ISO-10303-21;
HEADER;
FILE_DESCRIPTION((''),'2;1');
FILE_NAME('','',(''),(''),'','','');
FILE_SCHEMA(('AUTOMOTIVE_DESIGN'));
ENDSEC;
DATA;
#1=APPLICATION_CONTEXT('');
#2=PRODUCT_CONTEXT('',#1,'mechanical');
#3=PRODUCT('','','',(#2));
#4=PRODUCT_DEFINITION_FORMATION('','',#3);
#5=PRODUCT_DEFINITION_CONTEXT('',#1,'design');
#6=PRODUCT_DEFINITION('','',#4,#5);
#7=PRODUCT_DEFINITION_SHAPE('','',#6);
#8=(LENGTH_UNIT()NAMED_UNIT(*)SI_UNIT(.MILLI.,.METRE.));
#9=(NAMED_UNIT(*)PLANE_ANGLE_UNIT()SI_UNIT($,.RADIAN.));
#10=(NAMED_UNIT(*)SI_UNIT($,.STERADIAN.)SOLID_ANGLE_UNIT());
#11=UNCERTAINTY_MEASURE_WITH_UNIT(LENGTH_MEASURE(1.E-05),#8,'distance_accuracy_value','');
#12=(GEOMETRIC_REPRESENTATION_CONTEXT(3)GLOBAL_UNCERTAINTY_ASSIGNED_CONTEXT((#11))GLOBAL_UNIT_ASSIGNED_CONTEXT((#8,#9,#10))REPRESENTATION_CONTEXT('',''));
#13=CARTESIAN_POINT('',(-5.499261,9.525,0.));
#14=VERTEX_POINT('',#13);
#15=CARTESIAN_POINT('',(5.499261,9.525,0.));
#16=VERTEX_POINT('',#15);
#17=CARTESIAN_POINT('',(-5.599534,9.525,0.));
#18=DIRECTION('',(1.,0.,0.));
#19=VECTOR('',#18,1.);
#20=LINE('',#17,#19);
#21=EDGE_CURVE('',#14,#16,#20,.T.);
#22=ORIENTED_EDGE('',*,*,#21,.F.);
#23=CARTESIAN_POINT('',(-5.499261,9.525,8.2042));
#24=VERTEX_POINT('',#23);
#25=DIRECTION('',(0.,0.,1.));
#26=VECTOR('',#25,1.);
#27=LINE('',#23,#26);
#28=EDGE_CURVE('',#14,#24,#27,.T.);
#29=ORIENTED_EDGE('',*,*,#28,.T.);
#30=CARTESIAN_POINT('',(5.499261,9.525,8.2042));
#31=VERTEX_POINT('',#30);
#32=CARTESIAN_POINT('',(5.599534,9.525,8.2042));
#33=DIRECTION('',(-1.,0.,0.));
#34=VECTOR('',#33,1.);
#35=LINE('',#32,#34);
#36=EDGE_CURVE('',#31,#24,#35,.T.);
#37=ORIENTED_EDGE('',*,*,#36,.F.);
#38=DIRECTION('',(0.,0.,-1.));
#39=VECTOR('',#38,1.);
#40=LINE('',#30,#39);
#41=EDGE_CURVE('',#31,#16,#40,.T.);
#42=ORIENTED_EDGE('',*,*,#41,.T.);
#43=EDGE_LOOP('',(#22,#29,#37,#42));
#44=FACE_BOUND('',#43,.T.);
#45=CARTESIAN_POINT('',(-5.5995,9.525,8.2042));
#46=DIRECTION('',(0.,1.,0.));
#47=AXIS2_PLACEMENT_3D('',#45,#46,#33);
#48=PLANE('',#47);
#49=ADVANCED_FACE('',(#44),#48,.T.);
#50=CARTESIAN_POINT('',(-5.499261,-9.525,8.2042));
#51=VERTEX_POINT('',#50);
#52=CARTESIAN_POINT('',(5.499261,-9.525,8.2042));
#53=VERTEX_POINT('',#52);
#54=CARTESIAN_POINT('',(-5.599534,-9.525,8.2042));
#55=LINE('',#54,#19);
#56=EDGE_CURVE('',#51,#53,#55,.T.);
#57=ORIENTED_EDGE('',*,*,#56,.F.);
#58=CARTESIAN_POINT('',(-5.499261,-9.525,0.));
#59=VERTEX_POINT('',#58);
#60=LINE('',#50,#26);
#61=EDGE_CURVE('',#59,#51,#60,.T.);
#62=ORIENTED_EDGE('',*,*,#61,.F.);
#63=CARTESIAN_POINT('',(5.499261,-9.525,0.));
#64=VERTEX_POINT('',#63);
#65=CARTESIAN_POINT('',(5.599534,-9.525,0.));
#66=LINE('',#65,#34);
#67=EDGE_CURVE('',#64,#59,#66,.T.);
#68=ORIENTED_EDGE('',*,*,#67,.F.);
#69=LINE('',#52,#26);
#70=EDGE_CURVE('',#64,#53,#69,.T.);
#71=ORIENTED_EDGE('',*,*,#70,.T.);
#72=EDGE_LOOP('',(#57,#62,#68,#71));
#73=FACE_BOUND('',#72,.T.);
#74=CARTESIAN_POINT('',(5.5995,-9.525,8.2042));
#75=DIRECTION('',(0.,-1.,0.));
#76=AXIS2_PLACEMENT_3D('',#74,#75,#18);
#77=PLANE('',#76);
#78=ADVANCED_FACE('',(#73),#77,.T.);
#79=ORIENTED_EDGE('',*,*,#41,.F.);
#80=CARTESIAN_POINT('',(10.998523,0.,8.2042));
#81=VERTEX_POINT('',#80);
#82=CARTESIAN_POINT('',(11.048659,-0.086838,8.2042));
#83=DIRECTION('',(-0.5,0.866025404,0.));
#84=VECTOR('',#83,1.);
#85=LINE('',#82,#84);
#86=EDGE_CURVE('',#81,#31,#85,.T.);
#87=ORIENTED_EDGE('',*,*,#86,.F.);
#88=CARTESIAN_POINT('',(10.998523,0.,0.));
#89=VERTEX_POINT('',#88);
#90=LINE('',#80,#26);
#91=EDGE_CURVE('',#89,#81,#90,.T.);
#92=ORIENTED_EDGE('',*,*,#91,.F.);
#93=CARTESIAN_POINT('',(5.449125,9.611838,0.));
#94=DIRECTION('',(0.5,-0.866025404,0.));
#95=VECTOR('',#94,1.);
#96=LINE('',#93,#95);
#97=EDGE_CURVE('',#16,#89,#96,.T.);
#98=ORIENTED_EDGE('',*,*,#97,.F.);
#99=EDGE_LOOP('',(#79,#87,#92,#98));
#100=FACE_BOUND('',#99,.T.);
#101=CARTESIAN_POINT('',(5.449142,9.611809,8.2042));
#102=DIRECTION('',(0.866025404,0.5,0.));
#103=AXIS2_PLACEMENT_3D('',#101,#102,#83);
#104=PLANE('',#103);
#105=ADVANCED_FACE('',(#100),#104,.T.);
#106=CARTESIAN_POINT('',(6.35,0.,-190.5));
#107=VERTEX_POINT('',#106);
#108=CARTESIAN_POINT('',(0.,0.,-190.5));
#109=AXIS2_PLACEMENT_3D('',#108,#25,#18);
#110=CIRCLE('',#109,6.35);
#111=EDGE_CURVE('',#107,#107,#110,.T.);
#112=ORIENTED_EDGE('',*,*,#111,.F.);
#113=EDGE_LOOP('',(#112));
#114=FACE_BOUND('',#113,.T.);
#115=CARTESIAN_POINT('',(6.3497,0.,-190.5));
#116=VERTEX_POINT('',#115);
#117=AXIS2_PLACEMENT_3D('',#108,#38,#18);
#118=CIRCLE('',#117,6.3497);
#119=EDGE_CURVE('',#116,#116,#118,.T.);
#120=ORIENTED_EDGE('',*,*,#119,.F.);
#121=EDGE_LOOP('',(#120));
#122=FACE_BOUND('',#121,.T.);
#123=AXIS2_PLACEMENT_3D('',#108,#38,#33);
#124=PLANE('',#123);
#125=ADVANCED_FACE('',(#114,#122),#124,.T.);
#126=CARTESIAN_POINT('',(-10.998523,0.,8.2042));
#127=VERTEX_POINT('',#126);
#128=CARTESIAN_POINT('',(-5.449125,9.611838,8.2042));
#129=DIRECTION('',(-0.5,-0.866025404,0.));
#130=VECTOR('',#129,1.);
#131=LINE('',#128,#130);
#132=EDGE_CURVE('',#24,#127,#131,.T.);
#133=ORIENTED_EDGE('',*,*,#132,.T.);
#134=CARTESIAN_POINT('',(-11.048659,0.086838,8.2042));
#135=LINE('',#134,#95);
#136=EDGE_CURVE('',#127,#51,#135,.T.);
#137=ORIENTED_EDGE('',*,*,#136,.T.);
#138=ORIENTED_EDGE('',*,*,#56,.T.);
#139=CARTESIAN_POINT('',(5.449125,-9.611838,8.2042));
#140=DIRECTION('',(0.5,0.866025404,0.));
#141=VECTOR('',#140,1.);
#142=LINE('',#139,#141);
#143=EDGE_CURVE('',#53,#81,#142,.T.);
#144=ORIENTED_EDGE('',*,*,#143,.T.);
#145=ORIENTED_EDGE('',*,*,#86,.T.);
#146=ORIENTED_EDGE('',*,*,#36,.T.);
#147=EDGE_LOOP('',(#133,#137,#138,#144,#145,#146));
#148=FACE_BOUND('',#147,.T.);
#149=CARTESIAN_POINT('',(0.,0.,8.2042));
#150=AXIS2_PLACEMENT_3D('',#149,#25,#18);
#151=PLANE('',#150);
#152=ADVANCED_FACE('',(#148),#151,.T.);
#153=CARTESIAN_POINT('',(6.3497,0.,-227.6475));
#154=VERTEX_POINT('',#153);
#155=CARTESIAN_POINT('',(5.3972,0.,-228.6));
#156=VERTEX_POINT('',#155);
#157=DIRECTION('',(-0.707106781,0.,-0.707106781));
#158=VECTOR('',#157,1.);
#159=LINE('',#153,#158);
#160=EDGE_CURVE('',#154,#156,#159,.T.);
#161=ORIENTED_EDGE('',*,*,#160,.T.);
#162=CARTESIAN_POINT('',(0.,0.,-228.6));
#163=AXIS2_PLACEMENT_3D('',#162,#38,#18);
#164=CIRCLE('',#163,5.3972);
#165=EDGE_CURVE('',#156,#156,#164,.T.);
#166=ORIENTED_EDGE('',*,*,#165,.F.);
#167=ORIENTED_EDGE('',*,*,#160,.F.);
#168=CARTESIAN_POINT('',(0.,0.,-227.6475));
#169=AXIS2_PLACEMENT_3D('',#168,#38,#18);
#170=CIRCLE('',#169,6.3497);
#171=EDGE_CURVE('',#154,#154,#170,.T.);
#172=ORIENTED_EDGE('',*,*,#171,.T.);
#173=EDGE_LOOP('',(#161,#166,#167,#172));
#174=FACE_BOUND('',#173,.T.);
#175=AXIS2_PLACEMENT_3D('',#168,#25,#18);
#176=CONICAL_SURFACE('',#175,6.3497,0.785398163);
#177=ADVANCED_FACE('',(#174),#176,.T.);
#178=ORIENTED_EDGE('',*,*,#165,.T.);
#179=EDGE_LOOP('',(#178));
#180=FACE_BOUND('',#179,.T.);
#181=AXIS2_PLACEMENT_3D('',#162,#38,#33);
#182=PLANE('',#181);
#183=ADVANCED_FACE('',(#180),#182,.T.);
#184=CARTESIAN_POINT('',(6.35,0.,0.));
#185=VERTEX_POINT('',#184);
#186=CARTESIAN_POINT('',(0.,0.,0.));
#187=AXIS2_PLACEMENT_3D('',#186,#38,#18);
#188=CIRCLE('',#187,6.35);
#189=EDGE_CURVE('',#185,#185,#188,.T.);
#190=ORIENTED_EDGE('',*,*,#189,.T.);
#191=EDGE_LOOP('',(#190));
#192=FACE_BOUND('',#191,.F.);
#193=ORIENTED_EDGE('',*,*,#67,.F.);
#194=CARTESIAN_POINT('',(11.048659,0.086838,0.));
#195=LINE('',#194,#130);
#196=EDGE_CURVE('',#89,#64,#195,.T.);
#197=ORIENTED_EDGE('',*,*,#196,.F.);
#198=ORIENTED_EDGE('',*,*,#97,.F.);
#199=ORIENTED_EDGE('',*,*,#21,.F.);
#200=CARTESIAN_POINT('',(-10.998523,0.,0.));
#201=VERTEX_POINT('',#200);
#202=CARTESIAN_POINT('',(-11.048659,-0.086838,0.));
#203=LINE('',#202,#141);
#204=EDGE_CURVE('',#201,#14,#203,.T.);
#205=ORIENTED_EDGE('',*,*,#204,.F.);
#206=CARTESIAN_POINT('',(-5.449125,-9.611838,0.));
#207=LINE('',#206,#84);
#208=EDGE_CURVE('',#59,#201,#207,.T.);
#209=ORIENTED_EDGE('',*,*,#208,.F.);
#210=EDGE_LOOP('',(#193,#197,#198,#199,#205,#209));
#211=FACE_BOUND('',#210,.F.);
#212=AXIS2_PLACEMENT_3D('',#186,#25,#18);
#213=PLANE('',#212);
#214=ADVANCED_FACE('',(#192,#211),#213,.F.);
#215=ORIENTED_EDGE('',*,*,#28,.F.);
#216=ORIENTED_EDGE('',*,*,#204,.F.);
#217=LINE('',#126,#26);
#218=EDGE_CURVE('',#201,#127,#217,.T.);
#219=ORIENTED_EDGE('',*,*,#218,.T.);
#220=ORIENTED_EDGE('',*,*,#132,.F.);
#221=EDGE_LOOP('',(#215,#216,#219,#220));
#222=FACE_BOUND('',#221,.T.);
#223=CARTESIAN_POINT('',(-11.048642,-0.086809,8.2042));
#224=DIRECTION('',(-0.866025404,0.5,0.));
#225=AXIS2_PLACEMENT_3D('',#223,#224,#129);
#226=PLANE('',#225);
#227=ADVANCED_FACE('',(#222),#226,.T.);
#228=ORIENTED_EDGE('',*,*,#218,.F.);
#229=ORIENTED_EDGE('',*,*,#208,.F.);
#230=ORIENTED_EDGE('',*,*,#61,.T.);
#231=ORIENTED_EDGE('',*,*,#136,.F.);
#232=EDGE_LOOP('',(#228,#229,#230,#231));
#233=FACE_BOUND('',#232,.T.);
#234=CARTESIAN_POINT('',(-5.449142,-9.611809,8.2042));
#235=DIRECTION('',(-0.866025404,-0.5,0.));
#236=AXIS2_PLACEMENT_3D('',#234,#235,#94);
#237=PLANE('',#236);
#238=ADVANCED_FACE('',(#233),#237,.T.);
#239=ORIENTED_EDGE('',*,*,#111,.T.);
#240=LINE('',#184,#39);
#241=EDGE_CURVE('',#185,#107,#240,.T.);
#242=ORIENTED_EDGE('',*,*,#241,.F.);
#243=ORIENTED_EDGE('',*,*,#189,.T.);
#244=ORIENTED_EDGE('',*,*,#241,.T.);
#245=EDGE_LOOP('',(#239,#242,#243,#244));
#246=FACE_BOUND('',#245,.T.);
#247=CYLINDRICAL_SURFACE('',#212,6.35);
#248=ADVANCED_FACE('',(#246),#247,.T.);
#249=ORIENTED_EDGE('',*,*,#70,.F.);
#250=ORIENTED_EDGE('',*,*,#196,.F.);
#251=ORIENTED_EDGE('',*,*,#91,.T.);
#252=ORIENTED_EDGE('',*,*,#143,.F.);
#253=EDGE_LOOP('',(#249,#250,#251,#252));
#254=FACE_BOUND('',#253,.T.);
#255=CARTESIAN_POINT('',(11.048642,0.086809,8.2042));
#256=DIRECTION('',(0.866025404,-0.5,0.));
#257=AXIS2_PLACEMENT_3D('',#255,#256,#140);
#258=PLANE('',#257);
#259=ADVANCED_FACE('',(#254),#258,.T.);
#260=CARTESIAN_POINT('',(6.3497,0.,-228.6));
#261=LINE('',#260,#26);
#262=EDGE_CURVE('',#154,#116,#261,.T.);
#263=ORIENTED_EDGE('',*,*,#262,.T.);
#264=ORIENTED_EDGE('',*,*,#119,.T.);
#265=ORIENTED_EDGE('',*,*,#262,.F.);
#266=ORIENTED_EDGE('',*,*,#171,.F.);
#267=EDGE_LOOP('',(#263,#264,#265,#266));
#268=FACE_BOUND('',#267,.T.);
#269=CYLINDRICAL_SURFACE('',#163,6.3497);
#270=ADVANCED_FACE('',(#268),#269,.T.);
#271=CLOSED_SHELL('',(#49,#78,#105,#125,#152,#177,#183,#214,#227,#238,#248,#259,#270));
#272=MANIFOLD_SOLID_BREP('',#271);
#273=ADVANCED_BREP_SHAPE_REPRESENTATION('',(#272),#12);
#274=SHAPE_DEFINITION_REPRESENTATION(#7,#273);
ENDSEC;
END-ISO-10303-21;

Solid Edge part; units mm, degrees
sketch "Sketch1" plane through (0, 0, 0) normal (0, 0, 1) x (1, 0, 0)
  circle A0 centre (0, 0) radius 11.049
  dimension "D1" = 22.098
extrude "Protrusion1" add sketch "Sketch1" along normal blind 8.2042
sketch "Sketch2" plane through (0, 0, 0) normal (0, 0, -1) x (1, 0, 0)
  circle A0 centre (0, 0) radius 6.35
extrude "Protrusion2" add sketch "Sketch2" along normal blind 228.6
sketch "Sketch3" plane through (0, 0, -228.6) normal (0, 0, -1) x (1, 0, 0)
  circle A0 centre (0, 0) radius 6.3497
extrude "Cutout1" cut sketch "Sketch3" against normal blind 38.1 flip side to cut
chamfer "Chamfer_1" distance 0.9525 angle 45 1 edges at (-6.3497, 0, -228.6)
sketch "Sketch4" plane through (0, 0, 8.2042) normal (0, 0, 1) x (1, 0, 0)
  line L0 (-5.5995, 9.525) -> (5.5995, 9.525)
  dimension "D1" = 19.05
extrude "Cutout2" cut sketch "Sketch4" against normal up to next material side at (0, 9.575, 8.2042)
pattern_circular "Pattern1" count 6 over 360 about axis through (0, 0, 8.2042) along (0, 0, 1) of "Cutout2"
properties part number "24103309"
